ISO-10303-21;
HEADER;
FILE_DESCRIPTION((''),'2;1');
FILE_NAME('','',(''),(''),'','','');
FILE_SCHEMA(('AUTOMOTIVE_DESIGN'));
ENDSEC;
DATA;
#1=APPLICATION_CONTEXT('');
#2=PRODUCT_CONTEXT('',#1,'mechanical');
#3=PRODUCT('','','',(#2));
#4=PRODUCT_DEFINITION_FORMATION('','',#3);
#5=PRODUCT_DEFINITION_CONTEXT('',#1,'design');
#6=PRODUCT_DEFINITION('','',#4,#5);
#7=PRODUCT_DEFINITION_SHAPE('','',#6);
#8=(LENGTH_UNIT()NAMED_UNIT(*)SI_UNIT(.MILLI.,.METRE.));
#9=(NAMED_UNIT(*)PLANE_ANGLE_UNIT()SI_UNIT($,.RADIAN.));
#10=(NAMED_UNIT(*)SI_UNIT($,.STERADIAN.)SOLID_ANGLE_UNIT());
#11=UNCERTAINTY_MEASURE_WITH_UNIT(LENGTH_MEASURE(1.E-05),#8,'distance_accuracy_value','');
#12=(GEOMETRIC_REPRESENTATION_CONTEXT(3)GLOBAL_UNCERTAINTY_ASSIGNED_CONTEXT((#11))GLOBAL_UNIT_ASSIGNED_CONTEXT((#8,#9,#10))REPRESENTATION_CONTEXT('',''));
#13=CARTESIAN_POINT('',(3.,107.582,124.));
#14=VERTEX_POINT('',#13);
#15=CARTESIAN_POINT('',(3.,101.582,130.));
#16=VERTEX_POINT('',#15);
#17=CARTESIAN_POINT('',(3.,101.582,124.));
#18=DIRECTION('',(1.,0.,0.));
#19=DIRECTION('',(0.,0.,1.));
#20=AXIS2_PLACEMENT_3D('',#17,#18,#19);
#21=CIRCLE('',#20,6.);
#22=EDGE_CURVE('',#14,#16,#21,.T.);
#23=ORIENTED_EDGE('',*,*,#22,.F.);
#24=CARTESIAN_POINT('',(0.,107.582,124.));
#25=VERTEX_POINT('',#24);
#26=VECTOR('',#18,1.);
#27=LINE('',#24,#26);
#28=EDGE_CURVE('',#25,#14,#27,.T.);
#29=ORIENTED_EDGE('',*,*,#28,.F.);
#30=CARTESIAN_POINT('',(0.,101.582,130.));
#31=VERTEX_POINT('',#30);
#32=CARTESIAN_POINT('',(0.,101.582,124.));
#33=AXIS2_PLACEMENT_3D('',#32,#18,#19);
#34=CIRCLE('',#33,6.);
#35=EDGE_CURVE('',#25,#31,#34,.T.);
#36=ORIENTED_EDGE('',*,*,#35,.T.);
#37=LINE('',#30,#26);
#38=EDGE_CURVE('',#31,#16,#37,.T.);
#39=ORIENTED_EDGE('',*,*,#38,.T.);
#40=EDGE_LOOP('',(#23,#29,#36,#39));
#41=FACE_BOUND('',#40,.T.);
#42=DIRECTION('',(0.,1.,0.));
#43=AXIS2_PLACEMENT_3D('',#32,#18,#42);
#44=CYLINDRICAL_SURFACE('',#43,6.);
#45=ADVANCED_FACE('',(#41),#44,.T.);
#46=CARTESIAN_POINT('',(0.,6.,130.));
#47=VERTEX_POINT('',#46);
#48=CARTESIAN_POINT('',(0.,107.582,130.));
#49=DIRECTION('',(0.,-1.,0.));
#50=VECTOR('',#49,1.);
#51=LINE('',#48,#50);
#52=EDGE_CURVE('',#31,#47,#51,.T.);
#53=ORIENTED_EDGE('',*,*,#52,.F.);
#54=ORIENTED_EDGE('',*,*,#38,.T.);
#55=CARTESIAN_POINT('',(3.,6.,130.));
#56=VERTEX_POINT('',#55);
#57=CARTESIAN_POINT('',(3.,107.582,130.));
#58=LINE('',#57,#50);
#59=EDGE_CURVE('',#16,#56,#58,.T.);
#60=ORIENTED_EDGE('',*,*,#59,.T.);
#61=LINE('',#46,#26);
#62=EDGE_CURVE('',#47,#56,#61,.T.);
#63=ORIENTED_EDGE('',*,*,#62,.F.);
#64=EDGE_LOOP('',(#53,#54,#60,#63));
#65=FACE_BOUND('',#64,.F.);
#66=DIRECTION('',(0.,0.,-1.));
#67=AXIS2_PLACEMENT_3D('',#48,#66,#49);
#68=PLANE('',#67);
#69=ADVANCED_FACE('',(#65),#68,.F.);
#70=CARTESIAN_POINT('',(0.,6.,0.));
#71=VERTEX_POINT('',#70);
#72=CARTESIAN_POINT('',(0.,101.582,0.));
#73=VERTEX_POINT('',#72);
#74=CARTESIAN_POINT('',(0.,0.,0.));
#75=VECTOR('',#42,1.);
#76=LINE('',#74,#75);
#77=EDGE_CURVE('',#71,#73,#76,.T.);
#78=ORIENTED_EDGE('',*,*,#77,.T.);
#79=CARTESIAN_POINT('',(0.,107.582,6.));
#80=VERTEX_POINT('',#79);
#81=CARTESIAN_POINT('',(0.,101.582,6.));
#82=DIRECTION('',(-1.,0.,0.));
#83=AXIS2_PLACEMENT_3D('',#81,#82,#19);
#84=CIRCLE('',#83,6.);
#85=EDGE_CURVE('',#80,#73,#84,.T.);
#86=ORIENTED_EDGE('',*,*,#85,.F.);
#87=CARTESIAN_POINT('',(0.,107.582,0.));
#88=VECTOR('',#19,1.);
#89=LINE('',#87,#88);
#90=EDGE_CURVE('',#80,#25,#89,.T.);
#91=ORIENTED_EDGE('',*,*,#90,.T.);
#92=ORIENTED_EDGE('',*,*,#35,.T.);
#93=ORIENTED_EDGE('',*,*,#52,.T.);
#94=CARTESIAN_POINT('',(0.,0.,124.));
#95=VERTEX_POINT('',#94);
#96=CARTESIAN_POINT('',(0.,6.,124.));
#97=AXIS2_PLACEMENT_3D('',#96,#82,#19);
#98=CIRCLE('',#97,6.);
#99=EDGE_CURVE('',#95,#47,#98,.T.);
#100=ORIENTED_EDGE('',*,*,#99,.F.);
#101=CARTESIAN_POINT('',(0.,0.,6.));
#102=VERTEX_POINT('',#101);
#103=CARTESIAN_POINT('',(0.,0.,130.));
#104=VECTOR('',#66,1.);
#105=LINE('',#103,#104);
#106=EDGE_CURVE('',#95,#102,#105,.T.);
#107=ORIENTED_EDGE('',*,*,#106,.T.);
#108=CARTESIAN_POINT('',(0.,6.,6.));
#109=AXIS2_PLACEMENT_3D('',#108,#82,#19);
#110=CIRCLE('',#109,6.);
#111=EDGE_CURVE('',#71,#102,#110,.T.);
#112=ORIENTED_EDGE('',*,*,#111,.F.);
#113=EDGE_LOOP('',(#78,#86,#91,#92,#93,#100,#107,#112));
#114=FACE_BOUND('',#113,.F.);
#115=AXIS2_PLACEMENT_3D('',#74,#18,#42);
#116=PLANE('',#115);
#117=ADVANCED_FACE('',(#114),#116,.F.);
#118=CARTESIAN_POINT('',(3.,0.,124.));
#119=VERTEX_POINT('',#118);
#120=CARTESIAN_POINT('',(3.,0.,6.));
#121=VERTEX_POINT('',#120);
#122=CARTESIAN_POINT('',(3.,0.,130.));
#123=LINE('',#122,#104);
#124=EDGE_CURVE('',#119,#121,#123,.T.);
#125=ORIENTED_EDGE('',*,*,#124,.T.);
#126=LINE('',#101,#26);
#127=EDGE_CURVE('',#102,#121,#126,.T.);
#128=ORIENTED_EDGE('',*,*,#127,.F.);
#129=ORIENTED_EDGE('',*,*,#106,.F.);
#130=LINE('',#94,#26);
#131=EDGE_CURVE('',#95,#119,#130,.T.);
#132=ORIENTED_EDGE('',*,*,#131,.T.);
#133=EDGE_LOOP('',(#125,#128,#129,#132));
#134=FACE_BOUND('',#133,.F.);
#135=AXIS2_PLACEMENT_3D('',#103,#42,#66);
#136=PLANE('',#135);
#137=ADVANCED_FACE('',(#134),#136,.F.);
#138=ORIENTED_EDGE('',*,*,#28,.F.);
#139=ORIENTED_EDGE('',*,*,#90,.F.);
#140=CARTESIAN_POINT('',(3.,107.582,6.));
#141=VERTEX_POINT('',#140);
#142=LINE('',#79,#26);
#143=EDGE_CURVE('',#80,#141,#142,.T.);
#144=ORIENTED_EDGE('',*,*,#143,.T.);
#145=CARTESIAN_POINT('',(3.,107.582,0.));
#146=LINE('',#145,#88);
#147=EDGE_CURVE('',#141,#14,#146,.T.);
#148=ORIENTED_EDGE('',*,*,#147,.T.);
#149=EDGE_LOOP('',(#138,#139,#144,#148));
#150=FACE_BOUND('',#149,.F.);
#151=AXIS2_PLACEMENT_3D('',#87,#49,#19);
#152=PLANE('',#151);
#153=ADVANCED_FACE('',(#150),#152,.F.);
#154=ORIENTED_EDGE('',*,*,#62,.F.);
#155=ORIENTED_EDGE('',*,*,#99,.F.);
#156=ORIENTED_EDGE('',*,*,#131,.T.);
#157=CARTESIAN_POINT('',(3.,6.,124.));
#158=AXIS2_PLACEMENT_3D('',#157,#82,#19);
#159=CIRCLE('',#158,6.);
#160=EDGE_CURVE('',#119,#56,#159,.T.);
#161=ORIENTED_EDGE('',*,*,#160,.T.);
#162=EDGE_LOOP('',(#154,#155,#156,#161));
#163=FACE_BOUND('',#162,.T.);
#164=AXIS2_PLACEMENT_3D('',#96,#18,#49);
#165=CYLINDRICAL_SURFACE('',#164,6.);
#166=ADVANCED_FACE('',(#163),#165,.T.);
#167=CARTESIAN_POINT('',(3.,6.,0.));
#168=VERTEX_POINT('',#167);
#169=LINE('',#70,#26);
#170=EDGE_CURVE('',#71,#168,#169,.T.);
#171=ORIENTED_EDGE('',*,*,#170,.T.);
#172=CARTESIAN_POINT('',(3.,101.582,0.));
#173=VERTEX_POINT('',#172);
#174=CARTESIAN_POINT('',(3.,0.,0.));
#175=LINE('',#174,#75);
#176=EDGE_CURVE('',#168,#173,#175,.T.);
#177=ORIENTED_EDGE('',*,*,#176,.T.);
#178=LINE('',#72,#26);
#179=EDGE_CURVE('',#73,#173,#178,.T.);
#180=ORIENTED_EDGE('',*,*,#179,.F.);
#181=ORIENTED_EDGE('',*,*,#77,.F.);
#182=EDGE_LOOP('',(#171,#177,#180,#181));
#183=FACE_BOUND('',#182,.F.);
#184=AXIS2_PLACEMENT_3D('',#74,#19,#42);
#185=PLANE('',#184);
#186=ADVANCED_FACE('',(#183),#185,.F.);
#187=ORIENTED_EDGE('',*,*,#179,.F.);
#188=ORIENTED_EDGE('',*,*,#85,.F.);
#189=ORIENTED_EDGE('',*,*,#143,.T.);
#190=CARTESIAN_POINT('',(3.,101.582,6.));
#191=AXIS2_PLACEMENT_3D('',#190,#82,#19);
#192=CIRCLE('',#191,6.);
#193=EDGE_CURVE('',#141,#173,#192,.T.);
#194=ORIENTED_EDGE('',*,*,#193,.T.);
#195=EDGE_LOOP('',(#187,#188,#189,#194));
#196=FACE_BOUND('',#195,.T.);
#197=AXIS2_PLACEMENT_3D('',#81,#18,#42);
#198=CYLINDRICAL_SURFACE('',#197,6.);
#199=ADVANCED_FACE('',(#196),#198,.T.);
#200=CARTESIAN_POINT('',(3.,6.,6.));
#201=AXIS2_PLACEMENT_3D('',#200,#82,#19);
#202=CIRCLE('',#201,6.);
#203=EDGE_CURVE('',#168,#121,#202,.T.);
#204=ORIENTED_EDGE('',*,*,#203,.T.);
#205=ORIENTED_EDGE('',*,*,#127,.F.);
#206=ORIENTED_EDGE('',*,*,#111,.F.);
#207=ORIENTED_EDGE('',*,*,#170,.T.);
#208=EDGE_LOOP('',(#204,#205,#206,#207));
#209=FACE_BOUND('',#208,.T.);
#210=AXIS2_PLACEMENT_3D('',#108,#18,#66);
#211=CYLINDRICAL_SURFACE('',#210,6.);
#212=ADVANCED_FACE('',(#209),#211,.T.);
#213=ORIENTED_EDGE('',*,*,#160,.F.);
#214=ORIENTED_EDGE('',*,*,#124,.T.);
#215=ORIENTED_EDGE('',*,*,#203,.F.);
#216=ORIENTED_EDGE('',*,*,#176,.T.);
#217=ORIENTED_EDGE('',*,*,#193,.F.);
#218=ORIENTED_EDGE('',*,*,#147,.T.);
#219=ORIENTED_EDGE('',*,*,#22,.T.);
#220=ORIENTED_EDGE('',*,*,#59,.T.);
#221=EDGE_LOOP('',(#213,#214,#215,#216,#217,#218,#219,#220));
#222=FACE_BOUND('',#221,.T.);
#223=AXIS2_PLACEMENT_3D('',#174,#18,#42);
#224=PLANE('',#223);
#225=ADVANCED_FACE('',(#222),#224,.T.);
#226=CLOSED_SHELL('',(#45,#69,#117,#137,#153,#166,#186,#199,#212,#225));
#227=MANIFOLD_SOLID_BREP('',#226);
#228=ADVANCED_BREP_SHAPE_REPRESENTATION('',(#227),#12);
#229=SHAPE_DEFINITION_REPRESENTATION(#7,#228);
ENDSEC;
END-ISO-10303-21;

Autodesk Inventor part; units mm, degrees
ref_plane "YZ Plane" through (0, 0, 0) normal (1, 0, 0) x (0, 1, 0)
ref_plane "XZ Plane" through (0, 0, 0) normal (0, 1, 0) x (-1, 0, 0)
ref_plane "XY Plane" through (0, 0, 0) normal (0, 0, 1) x (1, 0, 0)
sketch "Sketch1" plane through (0, 0, 0) normal (1, 0, 0) x (0, 1, 0)
  line L0 (107.582, 130) -> (0, 130)
  line L1 (0, 130) -> (0, 0)
  line L2 (0, 0) -> (107.582, 0)
  line L3 (107.582, 0) -> (107.582, 130)
  dimension "d0" = 130
  dimension "d1" = 107.582
extrude "Plate1" add sketch "Sketch1" along normal blind 3
fillet "Corner Round1" radius 6 4 edges at (1.5, 107.582, 130) (1.5, 107.582, 0) (1.5, 0, 130) (1.5, 0, 0)
equation "\"d2\" = Thickness"
equation "\"BendReliefWidth\" = Thickness"
equation "\"BendReliefDepth\" = 0.5 * Thickness"
equation "\"CornerReliefSize\" = 4 * Thickness"
equation "\"MinimumRemnant\" = 2 * Thickness"
equation "\"TransitionRadius\" = BendRadius"
equation "\"JacobiRadiusSize\" = BendRadius"
equation "\"GapSize\" = Thickness"
equation "\"Thickness\" = 3"
equation "\"BendRadius\" = 5"
properties part number "MSC 802 BOTTOM PLATE GILLS" material "Stainless Steel"
